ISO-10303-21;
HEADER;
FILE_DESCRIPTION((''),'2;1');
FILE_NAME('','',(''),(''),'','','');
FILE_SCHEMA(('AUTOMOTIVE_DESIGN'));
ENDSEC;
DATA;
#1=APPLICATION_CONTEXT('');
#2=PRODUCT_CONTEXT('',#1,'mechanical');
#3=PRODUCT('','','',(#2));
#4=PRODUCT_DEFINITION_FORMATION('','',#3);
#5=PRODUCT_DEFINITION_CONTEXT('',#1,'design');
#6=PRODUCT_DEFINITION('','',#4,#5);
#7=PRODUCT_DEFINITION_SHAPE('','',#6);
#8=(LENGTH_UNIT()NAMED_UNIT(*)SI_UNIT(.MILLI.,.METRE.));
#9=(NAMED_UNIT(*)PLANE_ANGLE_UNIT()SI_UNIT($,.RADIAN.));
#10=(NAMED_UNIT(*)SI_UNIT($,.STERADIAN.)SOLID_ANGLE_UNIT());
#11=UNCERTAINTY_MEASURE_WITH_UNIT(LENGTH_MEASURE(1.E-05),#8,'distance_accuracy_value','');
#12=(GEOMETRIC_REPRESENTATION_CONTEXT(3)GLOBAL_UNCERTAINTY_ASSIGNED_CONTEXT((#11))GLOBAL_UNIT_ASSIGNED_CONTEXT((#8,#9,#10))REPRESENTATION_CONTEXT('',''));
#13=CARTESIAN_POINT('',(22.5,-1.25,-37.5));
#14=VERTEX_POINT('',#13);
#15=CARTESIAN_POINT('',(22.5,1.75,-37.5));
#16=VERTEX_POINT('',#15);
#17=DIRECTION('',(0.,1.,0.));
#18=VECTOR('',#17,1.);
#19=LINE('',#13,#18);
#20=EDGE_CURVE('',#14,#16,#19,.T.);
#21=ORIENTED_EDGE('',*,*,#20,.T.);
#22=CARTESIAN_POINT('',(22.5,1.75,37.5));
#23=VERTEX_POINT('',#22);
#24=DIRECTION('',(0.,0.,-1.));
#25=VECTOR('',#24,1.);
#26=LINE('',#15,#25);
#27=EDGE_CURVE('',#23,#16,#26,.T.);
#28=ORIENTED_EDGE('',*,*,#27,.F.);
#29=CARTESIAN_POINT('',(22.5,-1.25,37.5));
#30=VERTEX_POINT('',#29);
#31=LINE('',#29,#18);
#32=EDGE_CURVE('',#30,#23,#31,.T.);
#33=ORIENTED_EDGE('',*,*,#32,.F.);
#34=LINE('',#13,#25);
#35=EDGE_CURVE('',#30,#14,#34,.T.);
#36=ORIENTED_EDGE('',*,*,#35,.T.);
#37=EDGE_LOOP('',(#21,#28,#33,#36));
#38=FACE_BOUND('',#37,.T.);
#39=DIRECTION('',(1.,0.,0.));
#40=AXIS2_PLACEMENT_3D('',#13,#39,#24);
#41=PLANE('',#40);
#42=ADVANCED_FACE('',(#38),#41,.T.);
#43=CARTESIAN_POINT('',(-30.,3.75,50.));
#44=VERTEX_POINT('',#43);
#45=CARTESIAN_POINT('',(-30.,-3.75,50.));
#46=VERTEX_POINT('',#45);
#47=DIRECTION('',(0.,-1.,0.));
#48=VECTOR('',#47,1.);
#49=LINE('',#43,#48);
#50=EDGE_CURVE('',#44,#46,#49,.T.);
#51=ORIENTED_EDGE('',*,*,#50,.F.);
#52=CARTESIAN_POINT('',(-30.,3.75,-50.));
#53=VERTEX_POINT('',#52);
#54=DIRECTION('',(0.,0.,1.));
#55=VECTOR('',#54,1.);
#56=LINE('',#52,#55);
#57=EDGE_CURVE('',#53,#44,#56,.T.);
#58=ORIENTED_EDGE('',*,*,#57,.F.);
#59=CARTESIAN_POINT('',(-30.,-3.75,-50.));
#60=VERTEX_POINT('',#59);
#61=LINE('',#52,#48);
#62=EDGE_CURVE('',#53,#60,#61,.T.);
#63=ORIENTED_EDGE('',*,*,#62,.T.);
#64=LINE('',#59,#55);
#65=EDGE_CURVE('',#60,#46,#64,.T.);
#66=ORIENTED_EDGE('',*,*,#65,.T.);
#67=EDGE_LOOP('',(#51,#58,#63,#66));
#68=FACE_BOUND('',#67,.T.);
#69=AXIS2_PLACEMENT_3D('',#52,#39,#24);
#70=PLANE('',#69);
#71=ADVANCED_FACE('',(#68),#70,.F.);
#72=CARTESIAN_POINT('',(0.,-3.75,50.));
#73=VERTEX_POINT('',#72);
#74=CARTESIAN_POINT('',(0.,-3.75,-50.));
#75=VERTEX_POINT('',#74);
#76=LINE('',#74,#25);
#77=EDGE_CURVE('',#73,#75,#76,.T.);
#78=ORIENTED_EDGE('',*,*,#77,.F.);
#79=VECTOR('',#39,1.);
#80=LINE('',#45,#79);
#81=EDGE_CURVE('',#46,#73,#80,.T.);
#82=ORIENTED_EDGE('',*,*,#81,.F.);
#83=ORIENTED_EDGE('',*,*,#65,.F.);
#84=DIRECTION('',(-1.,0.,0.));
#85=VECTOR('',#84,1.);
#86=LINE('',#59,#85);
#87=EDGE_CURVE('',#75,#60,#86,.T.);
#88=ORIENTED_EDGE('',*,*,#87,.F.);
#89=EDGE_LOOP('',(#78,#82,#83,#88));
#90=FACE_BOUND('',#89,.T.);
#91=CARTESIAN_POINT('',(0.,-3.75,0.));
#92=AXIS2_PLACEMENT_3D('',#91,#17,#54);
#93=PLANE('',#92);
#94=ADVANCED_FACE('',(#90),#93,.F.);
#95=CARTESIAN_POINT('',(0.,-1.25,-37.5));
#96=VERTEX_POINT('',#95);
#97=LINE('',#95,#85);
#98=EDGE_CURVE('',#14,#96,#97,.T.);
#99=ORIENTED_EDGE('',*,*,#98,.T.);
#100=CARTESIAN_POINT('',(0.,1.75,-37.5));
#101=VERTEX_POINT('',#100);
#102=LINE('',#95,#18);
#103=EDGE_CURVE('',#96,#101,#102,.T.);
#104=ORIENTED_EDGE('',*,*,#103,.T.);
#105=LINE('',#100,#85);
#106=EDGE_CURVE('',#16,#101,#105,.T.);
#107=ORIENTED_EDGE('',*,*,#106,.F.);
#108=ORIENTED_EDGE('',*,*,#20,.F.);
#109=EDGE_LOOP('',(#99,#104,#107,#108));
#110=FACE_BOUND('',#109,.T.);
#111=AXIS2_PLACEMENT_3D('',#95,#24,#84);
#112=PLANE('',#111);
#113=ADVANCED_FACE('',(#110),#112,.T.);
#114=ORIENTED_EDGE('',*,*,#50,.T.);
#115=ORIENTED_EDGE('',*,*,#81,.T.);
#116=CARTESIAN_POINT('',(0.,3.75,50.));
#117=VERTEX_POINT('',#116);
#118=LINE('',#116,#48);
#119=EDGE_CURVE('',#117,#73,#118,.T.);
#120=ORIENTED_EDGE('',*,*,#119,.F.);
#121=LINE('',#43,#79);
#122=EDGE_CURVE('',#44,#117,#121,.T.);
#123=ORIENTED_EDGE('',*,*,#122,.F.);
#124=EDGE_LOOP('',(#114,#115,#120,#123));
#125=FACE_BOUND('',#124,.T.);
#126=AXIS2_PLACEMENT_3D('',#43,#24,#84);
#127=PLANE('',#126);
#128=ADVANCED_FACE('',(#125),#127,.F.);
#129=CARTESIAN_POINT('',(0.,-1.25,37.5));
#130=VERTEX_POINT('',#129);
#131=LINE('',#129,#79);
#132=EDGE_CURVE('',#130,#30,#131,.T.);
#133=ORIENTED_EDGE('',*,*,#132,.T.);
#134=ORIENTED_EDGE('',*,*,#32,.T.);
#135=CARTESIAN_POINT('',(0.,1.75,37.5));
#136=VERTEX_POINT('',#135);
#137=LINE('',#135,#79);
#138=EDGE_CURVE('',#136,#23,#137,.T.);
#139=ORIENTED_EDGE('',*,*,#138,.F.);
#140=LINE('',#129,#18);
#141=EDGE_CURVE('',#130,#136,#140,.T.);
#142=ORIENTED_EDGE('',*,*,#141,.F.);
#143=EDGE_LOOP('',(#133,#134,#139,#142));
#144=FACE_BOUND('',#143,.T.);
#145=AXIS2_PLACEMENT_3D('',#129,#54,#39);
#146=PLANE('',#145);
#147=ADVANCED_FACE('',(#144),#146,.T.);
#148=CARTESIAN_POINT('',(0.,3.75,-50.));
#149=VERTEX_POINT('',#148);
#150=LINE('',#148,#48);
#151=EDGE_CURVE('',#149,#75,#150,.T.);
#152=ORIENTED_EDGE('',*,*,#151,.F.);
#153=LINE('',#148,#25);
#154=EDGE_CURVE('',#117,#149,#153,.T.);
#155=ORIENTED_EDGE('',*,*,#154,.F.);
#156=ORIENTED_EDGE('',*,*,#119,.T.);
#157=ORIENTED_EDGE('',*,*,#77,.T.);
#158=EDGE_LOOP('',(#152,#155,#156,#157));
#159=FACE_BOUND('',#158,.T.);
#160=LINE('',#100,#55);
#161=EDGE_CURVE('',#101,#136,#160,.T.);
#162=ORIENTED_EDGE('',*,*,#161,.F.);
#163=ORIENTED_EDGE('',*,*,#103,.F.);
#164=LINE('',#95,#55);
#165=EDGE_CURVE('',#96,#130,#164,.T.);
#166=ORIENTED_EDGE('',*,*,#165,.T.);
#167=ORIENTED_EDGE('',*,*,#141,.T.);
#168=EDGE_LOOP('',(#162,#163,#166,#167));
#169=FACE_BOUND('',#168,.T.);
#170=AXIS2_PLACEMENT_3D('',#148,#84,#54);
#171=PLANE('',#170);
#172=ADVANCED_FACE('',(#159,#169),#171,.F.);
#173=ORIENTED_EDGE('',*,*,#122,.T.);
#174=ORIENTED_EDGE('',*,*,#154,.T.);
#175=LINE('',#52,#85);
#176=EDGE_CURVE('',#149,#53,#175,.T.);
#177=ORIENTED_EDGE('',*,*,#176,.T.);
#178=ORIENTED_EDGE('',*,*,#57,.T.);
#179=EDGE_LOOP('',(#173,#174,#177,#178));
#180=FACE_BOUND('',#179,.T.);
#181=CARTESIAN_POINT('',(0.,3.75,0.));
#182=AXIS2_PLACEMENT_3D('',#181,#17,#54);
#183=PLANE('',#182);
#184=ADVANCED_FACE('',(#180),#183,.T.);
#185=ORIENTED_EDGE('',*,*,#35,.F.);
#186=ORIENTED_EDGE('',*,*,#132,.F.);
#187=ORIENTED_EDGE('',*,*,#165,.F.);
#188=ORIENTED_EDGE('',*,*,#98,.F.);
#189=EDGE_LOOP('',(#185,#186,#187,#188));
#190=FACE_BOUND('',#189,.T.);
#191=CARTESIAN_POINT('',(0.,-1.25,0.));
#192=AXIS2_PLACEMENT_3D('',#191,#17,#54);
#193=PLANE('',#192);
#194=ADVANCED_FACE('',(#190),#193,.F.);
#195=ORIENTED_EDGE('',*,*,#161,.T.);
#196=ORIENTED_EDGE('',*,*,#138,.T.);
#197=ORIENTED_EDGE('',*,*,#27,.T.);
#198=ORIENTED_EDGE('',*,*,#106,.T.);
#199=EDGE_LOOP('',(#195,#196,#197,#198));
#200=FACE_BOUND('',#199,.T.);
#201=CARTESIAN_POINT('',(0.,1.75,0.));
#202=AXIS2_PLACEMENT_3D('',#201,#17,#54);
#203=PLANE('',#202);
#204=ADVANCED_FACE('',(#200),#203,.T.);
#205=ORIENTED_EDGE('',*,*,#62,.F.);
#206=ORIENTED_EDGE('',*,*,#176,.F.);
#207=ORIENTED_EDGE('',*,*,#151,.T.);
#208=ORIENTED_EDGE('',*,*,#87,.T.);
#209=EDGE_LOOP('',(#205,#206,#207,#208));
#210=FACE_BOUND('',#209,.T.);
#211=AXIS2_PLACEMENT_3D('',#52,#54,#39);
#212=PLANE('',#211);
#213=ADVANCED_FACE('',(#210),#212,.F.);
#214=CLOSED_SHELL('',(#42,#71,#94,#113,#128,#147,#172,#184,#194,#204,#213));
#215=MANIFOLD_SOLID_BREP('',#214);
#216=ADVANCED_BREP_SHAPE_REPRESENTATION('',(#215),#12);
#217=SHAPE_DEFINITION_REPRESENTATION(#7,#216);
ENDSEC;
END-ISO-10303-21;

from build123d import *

# Parameters (mm, degrees)
SKETCH1_W               = 30
SKETCH1_H               = 100
BOSS_EXTRUDE1_DEPTH     = 3.75
BOSS_EXTRUDE2_START     = -5
BOSS_EXTRUDE2_OUTLINE_W = 22.5
BOSS_EXTRUDE2_OUTLINE_H = 75
BOSS_EXTRUDE2_DEPTH     = 3


# Read off the part's stored shape, not the designer's step: Boss-Extrude2
with BuildPart() as part:
    # Sketch1 → Boss-Extrude1 (new, symmetric)
    with BuildSketch(Plane(origin=(0, 0, 0), x_dir=(1, 0, 0), z_dir=(0, 1, 0))):
        with Locations((-15, 0)):
            Rectangle(SKETCH1_W, SKETCH1_H)
    extrude(amount=BOSS_EXTRUDE1_DEPTH, both=True)

    # Boss-Extrude2 outline → Boss-Extrude2 (add)
    with BuildSketch(Plane(origin=(0, 3.75, 0), x_dir=(1, 0, 0), z_dir=(0, 1, 0)).offset(BOSS_EXTRUDE2_START)):
        with Locations((11.25, 0)):
            Rectangle(BOSS_EXTRUDE2_OUTLINE_W, BOSS_EXTRUDE2_OUTLINE_H)
    extrude(amount=BOSS_EXTRUDE2_DEPTH)


solid = part.part
